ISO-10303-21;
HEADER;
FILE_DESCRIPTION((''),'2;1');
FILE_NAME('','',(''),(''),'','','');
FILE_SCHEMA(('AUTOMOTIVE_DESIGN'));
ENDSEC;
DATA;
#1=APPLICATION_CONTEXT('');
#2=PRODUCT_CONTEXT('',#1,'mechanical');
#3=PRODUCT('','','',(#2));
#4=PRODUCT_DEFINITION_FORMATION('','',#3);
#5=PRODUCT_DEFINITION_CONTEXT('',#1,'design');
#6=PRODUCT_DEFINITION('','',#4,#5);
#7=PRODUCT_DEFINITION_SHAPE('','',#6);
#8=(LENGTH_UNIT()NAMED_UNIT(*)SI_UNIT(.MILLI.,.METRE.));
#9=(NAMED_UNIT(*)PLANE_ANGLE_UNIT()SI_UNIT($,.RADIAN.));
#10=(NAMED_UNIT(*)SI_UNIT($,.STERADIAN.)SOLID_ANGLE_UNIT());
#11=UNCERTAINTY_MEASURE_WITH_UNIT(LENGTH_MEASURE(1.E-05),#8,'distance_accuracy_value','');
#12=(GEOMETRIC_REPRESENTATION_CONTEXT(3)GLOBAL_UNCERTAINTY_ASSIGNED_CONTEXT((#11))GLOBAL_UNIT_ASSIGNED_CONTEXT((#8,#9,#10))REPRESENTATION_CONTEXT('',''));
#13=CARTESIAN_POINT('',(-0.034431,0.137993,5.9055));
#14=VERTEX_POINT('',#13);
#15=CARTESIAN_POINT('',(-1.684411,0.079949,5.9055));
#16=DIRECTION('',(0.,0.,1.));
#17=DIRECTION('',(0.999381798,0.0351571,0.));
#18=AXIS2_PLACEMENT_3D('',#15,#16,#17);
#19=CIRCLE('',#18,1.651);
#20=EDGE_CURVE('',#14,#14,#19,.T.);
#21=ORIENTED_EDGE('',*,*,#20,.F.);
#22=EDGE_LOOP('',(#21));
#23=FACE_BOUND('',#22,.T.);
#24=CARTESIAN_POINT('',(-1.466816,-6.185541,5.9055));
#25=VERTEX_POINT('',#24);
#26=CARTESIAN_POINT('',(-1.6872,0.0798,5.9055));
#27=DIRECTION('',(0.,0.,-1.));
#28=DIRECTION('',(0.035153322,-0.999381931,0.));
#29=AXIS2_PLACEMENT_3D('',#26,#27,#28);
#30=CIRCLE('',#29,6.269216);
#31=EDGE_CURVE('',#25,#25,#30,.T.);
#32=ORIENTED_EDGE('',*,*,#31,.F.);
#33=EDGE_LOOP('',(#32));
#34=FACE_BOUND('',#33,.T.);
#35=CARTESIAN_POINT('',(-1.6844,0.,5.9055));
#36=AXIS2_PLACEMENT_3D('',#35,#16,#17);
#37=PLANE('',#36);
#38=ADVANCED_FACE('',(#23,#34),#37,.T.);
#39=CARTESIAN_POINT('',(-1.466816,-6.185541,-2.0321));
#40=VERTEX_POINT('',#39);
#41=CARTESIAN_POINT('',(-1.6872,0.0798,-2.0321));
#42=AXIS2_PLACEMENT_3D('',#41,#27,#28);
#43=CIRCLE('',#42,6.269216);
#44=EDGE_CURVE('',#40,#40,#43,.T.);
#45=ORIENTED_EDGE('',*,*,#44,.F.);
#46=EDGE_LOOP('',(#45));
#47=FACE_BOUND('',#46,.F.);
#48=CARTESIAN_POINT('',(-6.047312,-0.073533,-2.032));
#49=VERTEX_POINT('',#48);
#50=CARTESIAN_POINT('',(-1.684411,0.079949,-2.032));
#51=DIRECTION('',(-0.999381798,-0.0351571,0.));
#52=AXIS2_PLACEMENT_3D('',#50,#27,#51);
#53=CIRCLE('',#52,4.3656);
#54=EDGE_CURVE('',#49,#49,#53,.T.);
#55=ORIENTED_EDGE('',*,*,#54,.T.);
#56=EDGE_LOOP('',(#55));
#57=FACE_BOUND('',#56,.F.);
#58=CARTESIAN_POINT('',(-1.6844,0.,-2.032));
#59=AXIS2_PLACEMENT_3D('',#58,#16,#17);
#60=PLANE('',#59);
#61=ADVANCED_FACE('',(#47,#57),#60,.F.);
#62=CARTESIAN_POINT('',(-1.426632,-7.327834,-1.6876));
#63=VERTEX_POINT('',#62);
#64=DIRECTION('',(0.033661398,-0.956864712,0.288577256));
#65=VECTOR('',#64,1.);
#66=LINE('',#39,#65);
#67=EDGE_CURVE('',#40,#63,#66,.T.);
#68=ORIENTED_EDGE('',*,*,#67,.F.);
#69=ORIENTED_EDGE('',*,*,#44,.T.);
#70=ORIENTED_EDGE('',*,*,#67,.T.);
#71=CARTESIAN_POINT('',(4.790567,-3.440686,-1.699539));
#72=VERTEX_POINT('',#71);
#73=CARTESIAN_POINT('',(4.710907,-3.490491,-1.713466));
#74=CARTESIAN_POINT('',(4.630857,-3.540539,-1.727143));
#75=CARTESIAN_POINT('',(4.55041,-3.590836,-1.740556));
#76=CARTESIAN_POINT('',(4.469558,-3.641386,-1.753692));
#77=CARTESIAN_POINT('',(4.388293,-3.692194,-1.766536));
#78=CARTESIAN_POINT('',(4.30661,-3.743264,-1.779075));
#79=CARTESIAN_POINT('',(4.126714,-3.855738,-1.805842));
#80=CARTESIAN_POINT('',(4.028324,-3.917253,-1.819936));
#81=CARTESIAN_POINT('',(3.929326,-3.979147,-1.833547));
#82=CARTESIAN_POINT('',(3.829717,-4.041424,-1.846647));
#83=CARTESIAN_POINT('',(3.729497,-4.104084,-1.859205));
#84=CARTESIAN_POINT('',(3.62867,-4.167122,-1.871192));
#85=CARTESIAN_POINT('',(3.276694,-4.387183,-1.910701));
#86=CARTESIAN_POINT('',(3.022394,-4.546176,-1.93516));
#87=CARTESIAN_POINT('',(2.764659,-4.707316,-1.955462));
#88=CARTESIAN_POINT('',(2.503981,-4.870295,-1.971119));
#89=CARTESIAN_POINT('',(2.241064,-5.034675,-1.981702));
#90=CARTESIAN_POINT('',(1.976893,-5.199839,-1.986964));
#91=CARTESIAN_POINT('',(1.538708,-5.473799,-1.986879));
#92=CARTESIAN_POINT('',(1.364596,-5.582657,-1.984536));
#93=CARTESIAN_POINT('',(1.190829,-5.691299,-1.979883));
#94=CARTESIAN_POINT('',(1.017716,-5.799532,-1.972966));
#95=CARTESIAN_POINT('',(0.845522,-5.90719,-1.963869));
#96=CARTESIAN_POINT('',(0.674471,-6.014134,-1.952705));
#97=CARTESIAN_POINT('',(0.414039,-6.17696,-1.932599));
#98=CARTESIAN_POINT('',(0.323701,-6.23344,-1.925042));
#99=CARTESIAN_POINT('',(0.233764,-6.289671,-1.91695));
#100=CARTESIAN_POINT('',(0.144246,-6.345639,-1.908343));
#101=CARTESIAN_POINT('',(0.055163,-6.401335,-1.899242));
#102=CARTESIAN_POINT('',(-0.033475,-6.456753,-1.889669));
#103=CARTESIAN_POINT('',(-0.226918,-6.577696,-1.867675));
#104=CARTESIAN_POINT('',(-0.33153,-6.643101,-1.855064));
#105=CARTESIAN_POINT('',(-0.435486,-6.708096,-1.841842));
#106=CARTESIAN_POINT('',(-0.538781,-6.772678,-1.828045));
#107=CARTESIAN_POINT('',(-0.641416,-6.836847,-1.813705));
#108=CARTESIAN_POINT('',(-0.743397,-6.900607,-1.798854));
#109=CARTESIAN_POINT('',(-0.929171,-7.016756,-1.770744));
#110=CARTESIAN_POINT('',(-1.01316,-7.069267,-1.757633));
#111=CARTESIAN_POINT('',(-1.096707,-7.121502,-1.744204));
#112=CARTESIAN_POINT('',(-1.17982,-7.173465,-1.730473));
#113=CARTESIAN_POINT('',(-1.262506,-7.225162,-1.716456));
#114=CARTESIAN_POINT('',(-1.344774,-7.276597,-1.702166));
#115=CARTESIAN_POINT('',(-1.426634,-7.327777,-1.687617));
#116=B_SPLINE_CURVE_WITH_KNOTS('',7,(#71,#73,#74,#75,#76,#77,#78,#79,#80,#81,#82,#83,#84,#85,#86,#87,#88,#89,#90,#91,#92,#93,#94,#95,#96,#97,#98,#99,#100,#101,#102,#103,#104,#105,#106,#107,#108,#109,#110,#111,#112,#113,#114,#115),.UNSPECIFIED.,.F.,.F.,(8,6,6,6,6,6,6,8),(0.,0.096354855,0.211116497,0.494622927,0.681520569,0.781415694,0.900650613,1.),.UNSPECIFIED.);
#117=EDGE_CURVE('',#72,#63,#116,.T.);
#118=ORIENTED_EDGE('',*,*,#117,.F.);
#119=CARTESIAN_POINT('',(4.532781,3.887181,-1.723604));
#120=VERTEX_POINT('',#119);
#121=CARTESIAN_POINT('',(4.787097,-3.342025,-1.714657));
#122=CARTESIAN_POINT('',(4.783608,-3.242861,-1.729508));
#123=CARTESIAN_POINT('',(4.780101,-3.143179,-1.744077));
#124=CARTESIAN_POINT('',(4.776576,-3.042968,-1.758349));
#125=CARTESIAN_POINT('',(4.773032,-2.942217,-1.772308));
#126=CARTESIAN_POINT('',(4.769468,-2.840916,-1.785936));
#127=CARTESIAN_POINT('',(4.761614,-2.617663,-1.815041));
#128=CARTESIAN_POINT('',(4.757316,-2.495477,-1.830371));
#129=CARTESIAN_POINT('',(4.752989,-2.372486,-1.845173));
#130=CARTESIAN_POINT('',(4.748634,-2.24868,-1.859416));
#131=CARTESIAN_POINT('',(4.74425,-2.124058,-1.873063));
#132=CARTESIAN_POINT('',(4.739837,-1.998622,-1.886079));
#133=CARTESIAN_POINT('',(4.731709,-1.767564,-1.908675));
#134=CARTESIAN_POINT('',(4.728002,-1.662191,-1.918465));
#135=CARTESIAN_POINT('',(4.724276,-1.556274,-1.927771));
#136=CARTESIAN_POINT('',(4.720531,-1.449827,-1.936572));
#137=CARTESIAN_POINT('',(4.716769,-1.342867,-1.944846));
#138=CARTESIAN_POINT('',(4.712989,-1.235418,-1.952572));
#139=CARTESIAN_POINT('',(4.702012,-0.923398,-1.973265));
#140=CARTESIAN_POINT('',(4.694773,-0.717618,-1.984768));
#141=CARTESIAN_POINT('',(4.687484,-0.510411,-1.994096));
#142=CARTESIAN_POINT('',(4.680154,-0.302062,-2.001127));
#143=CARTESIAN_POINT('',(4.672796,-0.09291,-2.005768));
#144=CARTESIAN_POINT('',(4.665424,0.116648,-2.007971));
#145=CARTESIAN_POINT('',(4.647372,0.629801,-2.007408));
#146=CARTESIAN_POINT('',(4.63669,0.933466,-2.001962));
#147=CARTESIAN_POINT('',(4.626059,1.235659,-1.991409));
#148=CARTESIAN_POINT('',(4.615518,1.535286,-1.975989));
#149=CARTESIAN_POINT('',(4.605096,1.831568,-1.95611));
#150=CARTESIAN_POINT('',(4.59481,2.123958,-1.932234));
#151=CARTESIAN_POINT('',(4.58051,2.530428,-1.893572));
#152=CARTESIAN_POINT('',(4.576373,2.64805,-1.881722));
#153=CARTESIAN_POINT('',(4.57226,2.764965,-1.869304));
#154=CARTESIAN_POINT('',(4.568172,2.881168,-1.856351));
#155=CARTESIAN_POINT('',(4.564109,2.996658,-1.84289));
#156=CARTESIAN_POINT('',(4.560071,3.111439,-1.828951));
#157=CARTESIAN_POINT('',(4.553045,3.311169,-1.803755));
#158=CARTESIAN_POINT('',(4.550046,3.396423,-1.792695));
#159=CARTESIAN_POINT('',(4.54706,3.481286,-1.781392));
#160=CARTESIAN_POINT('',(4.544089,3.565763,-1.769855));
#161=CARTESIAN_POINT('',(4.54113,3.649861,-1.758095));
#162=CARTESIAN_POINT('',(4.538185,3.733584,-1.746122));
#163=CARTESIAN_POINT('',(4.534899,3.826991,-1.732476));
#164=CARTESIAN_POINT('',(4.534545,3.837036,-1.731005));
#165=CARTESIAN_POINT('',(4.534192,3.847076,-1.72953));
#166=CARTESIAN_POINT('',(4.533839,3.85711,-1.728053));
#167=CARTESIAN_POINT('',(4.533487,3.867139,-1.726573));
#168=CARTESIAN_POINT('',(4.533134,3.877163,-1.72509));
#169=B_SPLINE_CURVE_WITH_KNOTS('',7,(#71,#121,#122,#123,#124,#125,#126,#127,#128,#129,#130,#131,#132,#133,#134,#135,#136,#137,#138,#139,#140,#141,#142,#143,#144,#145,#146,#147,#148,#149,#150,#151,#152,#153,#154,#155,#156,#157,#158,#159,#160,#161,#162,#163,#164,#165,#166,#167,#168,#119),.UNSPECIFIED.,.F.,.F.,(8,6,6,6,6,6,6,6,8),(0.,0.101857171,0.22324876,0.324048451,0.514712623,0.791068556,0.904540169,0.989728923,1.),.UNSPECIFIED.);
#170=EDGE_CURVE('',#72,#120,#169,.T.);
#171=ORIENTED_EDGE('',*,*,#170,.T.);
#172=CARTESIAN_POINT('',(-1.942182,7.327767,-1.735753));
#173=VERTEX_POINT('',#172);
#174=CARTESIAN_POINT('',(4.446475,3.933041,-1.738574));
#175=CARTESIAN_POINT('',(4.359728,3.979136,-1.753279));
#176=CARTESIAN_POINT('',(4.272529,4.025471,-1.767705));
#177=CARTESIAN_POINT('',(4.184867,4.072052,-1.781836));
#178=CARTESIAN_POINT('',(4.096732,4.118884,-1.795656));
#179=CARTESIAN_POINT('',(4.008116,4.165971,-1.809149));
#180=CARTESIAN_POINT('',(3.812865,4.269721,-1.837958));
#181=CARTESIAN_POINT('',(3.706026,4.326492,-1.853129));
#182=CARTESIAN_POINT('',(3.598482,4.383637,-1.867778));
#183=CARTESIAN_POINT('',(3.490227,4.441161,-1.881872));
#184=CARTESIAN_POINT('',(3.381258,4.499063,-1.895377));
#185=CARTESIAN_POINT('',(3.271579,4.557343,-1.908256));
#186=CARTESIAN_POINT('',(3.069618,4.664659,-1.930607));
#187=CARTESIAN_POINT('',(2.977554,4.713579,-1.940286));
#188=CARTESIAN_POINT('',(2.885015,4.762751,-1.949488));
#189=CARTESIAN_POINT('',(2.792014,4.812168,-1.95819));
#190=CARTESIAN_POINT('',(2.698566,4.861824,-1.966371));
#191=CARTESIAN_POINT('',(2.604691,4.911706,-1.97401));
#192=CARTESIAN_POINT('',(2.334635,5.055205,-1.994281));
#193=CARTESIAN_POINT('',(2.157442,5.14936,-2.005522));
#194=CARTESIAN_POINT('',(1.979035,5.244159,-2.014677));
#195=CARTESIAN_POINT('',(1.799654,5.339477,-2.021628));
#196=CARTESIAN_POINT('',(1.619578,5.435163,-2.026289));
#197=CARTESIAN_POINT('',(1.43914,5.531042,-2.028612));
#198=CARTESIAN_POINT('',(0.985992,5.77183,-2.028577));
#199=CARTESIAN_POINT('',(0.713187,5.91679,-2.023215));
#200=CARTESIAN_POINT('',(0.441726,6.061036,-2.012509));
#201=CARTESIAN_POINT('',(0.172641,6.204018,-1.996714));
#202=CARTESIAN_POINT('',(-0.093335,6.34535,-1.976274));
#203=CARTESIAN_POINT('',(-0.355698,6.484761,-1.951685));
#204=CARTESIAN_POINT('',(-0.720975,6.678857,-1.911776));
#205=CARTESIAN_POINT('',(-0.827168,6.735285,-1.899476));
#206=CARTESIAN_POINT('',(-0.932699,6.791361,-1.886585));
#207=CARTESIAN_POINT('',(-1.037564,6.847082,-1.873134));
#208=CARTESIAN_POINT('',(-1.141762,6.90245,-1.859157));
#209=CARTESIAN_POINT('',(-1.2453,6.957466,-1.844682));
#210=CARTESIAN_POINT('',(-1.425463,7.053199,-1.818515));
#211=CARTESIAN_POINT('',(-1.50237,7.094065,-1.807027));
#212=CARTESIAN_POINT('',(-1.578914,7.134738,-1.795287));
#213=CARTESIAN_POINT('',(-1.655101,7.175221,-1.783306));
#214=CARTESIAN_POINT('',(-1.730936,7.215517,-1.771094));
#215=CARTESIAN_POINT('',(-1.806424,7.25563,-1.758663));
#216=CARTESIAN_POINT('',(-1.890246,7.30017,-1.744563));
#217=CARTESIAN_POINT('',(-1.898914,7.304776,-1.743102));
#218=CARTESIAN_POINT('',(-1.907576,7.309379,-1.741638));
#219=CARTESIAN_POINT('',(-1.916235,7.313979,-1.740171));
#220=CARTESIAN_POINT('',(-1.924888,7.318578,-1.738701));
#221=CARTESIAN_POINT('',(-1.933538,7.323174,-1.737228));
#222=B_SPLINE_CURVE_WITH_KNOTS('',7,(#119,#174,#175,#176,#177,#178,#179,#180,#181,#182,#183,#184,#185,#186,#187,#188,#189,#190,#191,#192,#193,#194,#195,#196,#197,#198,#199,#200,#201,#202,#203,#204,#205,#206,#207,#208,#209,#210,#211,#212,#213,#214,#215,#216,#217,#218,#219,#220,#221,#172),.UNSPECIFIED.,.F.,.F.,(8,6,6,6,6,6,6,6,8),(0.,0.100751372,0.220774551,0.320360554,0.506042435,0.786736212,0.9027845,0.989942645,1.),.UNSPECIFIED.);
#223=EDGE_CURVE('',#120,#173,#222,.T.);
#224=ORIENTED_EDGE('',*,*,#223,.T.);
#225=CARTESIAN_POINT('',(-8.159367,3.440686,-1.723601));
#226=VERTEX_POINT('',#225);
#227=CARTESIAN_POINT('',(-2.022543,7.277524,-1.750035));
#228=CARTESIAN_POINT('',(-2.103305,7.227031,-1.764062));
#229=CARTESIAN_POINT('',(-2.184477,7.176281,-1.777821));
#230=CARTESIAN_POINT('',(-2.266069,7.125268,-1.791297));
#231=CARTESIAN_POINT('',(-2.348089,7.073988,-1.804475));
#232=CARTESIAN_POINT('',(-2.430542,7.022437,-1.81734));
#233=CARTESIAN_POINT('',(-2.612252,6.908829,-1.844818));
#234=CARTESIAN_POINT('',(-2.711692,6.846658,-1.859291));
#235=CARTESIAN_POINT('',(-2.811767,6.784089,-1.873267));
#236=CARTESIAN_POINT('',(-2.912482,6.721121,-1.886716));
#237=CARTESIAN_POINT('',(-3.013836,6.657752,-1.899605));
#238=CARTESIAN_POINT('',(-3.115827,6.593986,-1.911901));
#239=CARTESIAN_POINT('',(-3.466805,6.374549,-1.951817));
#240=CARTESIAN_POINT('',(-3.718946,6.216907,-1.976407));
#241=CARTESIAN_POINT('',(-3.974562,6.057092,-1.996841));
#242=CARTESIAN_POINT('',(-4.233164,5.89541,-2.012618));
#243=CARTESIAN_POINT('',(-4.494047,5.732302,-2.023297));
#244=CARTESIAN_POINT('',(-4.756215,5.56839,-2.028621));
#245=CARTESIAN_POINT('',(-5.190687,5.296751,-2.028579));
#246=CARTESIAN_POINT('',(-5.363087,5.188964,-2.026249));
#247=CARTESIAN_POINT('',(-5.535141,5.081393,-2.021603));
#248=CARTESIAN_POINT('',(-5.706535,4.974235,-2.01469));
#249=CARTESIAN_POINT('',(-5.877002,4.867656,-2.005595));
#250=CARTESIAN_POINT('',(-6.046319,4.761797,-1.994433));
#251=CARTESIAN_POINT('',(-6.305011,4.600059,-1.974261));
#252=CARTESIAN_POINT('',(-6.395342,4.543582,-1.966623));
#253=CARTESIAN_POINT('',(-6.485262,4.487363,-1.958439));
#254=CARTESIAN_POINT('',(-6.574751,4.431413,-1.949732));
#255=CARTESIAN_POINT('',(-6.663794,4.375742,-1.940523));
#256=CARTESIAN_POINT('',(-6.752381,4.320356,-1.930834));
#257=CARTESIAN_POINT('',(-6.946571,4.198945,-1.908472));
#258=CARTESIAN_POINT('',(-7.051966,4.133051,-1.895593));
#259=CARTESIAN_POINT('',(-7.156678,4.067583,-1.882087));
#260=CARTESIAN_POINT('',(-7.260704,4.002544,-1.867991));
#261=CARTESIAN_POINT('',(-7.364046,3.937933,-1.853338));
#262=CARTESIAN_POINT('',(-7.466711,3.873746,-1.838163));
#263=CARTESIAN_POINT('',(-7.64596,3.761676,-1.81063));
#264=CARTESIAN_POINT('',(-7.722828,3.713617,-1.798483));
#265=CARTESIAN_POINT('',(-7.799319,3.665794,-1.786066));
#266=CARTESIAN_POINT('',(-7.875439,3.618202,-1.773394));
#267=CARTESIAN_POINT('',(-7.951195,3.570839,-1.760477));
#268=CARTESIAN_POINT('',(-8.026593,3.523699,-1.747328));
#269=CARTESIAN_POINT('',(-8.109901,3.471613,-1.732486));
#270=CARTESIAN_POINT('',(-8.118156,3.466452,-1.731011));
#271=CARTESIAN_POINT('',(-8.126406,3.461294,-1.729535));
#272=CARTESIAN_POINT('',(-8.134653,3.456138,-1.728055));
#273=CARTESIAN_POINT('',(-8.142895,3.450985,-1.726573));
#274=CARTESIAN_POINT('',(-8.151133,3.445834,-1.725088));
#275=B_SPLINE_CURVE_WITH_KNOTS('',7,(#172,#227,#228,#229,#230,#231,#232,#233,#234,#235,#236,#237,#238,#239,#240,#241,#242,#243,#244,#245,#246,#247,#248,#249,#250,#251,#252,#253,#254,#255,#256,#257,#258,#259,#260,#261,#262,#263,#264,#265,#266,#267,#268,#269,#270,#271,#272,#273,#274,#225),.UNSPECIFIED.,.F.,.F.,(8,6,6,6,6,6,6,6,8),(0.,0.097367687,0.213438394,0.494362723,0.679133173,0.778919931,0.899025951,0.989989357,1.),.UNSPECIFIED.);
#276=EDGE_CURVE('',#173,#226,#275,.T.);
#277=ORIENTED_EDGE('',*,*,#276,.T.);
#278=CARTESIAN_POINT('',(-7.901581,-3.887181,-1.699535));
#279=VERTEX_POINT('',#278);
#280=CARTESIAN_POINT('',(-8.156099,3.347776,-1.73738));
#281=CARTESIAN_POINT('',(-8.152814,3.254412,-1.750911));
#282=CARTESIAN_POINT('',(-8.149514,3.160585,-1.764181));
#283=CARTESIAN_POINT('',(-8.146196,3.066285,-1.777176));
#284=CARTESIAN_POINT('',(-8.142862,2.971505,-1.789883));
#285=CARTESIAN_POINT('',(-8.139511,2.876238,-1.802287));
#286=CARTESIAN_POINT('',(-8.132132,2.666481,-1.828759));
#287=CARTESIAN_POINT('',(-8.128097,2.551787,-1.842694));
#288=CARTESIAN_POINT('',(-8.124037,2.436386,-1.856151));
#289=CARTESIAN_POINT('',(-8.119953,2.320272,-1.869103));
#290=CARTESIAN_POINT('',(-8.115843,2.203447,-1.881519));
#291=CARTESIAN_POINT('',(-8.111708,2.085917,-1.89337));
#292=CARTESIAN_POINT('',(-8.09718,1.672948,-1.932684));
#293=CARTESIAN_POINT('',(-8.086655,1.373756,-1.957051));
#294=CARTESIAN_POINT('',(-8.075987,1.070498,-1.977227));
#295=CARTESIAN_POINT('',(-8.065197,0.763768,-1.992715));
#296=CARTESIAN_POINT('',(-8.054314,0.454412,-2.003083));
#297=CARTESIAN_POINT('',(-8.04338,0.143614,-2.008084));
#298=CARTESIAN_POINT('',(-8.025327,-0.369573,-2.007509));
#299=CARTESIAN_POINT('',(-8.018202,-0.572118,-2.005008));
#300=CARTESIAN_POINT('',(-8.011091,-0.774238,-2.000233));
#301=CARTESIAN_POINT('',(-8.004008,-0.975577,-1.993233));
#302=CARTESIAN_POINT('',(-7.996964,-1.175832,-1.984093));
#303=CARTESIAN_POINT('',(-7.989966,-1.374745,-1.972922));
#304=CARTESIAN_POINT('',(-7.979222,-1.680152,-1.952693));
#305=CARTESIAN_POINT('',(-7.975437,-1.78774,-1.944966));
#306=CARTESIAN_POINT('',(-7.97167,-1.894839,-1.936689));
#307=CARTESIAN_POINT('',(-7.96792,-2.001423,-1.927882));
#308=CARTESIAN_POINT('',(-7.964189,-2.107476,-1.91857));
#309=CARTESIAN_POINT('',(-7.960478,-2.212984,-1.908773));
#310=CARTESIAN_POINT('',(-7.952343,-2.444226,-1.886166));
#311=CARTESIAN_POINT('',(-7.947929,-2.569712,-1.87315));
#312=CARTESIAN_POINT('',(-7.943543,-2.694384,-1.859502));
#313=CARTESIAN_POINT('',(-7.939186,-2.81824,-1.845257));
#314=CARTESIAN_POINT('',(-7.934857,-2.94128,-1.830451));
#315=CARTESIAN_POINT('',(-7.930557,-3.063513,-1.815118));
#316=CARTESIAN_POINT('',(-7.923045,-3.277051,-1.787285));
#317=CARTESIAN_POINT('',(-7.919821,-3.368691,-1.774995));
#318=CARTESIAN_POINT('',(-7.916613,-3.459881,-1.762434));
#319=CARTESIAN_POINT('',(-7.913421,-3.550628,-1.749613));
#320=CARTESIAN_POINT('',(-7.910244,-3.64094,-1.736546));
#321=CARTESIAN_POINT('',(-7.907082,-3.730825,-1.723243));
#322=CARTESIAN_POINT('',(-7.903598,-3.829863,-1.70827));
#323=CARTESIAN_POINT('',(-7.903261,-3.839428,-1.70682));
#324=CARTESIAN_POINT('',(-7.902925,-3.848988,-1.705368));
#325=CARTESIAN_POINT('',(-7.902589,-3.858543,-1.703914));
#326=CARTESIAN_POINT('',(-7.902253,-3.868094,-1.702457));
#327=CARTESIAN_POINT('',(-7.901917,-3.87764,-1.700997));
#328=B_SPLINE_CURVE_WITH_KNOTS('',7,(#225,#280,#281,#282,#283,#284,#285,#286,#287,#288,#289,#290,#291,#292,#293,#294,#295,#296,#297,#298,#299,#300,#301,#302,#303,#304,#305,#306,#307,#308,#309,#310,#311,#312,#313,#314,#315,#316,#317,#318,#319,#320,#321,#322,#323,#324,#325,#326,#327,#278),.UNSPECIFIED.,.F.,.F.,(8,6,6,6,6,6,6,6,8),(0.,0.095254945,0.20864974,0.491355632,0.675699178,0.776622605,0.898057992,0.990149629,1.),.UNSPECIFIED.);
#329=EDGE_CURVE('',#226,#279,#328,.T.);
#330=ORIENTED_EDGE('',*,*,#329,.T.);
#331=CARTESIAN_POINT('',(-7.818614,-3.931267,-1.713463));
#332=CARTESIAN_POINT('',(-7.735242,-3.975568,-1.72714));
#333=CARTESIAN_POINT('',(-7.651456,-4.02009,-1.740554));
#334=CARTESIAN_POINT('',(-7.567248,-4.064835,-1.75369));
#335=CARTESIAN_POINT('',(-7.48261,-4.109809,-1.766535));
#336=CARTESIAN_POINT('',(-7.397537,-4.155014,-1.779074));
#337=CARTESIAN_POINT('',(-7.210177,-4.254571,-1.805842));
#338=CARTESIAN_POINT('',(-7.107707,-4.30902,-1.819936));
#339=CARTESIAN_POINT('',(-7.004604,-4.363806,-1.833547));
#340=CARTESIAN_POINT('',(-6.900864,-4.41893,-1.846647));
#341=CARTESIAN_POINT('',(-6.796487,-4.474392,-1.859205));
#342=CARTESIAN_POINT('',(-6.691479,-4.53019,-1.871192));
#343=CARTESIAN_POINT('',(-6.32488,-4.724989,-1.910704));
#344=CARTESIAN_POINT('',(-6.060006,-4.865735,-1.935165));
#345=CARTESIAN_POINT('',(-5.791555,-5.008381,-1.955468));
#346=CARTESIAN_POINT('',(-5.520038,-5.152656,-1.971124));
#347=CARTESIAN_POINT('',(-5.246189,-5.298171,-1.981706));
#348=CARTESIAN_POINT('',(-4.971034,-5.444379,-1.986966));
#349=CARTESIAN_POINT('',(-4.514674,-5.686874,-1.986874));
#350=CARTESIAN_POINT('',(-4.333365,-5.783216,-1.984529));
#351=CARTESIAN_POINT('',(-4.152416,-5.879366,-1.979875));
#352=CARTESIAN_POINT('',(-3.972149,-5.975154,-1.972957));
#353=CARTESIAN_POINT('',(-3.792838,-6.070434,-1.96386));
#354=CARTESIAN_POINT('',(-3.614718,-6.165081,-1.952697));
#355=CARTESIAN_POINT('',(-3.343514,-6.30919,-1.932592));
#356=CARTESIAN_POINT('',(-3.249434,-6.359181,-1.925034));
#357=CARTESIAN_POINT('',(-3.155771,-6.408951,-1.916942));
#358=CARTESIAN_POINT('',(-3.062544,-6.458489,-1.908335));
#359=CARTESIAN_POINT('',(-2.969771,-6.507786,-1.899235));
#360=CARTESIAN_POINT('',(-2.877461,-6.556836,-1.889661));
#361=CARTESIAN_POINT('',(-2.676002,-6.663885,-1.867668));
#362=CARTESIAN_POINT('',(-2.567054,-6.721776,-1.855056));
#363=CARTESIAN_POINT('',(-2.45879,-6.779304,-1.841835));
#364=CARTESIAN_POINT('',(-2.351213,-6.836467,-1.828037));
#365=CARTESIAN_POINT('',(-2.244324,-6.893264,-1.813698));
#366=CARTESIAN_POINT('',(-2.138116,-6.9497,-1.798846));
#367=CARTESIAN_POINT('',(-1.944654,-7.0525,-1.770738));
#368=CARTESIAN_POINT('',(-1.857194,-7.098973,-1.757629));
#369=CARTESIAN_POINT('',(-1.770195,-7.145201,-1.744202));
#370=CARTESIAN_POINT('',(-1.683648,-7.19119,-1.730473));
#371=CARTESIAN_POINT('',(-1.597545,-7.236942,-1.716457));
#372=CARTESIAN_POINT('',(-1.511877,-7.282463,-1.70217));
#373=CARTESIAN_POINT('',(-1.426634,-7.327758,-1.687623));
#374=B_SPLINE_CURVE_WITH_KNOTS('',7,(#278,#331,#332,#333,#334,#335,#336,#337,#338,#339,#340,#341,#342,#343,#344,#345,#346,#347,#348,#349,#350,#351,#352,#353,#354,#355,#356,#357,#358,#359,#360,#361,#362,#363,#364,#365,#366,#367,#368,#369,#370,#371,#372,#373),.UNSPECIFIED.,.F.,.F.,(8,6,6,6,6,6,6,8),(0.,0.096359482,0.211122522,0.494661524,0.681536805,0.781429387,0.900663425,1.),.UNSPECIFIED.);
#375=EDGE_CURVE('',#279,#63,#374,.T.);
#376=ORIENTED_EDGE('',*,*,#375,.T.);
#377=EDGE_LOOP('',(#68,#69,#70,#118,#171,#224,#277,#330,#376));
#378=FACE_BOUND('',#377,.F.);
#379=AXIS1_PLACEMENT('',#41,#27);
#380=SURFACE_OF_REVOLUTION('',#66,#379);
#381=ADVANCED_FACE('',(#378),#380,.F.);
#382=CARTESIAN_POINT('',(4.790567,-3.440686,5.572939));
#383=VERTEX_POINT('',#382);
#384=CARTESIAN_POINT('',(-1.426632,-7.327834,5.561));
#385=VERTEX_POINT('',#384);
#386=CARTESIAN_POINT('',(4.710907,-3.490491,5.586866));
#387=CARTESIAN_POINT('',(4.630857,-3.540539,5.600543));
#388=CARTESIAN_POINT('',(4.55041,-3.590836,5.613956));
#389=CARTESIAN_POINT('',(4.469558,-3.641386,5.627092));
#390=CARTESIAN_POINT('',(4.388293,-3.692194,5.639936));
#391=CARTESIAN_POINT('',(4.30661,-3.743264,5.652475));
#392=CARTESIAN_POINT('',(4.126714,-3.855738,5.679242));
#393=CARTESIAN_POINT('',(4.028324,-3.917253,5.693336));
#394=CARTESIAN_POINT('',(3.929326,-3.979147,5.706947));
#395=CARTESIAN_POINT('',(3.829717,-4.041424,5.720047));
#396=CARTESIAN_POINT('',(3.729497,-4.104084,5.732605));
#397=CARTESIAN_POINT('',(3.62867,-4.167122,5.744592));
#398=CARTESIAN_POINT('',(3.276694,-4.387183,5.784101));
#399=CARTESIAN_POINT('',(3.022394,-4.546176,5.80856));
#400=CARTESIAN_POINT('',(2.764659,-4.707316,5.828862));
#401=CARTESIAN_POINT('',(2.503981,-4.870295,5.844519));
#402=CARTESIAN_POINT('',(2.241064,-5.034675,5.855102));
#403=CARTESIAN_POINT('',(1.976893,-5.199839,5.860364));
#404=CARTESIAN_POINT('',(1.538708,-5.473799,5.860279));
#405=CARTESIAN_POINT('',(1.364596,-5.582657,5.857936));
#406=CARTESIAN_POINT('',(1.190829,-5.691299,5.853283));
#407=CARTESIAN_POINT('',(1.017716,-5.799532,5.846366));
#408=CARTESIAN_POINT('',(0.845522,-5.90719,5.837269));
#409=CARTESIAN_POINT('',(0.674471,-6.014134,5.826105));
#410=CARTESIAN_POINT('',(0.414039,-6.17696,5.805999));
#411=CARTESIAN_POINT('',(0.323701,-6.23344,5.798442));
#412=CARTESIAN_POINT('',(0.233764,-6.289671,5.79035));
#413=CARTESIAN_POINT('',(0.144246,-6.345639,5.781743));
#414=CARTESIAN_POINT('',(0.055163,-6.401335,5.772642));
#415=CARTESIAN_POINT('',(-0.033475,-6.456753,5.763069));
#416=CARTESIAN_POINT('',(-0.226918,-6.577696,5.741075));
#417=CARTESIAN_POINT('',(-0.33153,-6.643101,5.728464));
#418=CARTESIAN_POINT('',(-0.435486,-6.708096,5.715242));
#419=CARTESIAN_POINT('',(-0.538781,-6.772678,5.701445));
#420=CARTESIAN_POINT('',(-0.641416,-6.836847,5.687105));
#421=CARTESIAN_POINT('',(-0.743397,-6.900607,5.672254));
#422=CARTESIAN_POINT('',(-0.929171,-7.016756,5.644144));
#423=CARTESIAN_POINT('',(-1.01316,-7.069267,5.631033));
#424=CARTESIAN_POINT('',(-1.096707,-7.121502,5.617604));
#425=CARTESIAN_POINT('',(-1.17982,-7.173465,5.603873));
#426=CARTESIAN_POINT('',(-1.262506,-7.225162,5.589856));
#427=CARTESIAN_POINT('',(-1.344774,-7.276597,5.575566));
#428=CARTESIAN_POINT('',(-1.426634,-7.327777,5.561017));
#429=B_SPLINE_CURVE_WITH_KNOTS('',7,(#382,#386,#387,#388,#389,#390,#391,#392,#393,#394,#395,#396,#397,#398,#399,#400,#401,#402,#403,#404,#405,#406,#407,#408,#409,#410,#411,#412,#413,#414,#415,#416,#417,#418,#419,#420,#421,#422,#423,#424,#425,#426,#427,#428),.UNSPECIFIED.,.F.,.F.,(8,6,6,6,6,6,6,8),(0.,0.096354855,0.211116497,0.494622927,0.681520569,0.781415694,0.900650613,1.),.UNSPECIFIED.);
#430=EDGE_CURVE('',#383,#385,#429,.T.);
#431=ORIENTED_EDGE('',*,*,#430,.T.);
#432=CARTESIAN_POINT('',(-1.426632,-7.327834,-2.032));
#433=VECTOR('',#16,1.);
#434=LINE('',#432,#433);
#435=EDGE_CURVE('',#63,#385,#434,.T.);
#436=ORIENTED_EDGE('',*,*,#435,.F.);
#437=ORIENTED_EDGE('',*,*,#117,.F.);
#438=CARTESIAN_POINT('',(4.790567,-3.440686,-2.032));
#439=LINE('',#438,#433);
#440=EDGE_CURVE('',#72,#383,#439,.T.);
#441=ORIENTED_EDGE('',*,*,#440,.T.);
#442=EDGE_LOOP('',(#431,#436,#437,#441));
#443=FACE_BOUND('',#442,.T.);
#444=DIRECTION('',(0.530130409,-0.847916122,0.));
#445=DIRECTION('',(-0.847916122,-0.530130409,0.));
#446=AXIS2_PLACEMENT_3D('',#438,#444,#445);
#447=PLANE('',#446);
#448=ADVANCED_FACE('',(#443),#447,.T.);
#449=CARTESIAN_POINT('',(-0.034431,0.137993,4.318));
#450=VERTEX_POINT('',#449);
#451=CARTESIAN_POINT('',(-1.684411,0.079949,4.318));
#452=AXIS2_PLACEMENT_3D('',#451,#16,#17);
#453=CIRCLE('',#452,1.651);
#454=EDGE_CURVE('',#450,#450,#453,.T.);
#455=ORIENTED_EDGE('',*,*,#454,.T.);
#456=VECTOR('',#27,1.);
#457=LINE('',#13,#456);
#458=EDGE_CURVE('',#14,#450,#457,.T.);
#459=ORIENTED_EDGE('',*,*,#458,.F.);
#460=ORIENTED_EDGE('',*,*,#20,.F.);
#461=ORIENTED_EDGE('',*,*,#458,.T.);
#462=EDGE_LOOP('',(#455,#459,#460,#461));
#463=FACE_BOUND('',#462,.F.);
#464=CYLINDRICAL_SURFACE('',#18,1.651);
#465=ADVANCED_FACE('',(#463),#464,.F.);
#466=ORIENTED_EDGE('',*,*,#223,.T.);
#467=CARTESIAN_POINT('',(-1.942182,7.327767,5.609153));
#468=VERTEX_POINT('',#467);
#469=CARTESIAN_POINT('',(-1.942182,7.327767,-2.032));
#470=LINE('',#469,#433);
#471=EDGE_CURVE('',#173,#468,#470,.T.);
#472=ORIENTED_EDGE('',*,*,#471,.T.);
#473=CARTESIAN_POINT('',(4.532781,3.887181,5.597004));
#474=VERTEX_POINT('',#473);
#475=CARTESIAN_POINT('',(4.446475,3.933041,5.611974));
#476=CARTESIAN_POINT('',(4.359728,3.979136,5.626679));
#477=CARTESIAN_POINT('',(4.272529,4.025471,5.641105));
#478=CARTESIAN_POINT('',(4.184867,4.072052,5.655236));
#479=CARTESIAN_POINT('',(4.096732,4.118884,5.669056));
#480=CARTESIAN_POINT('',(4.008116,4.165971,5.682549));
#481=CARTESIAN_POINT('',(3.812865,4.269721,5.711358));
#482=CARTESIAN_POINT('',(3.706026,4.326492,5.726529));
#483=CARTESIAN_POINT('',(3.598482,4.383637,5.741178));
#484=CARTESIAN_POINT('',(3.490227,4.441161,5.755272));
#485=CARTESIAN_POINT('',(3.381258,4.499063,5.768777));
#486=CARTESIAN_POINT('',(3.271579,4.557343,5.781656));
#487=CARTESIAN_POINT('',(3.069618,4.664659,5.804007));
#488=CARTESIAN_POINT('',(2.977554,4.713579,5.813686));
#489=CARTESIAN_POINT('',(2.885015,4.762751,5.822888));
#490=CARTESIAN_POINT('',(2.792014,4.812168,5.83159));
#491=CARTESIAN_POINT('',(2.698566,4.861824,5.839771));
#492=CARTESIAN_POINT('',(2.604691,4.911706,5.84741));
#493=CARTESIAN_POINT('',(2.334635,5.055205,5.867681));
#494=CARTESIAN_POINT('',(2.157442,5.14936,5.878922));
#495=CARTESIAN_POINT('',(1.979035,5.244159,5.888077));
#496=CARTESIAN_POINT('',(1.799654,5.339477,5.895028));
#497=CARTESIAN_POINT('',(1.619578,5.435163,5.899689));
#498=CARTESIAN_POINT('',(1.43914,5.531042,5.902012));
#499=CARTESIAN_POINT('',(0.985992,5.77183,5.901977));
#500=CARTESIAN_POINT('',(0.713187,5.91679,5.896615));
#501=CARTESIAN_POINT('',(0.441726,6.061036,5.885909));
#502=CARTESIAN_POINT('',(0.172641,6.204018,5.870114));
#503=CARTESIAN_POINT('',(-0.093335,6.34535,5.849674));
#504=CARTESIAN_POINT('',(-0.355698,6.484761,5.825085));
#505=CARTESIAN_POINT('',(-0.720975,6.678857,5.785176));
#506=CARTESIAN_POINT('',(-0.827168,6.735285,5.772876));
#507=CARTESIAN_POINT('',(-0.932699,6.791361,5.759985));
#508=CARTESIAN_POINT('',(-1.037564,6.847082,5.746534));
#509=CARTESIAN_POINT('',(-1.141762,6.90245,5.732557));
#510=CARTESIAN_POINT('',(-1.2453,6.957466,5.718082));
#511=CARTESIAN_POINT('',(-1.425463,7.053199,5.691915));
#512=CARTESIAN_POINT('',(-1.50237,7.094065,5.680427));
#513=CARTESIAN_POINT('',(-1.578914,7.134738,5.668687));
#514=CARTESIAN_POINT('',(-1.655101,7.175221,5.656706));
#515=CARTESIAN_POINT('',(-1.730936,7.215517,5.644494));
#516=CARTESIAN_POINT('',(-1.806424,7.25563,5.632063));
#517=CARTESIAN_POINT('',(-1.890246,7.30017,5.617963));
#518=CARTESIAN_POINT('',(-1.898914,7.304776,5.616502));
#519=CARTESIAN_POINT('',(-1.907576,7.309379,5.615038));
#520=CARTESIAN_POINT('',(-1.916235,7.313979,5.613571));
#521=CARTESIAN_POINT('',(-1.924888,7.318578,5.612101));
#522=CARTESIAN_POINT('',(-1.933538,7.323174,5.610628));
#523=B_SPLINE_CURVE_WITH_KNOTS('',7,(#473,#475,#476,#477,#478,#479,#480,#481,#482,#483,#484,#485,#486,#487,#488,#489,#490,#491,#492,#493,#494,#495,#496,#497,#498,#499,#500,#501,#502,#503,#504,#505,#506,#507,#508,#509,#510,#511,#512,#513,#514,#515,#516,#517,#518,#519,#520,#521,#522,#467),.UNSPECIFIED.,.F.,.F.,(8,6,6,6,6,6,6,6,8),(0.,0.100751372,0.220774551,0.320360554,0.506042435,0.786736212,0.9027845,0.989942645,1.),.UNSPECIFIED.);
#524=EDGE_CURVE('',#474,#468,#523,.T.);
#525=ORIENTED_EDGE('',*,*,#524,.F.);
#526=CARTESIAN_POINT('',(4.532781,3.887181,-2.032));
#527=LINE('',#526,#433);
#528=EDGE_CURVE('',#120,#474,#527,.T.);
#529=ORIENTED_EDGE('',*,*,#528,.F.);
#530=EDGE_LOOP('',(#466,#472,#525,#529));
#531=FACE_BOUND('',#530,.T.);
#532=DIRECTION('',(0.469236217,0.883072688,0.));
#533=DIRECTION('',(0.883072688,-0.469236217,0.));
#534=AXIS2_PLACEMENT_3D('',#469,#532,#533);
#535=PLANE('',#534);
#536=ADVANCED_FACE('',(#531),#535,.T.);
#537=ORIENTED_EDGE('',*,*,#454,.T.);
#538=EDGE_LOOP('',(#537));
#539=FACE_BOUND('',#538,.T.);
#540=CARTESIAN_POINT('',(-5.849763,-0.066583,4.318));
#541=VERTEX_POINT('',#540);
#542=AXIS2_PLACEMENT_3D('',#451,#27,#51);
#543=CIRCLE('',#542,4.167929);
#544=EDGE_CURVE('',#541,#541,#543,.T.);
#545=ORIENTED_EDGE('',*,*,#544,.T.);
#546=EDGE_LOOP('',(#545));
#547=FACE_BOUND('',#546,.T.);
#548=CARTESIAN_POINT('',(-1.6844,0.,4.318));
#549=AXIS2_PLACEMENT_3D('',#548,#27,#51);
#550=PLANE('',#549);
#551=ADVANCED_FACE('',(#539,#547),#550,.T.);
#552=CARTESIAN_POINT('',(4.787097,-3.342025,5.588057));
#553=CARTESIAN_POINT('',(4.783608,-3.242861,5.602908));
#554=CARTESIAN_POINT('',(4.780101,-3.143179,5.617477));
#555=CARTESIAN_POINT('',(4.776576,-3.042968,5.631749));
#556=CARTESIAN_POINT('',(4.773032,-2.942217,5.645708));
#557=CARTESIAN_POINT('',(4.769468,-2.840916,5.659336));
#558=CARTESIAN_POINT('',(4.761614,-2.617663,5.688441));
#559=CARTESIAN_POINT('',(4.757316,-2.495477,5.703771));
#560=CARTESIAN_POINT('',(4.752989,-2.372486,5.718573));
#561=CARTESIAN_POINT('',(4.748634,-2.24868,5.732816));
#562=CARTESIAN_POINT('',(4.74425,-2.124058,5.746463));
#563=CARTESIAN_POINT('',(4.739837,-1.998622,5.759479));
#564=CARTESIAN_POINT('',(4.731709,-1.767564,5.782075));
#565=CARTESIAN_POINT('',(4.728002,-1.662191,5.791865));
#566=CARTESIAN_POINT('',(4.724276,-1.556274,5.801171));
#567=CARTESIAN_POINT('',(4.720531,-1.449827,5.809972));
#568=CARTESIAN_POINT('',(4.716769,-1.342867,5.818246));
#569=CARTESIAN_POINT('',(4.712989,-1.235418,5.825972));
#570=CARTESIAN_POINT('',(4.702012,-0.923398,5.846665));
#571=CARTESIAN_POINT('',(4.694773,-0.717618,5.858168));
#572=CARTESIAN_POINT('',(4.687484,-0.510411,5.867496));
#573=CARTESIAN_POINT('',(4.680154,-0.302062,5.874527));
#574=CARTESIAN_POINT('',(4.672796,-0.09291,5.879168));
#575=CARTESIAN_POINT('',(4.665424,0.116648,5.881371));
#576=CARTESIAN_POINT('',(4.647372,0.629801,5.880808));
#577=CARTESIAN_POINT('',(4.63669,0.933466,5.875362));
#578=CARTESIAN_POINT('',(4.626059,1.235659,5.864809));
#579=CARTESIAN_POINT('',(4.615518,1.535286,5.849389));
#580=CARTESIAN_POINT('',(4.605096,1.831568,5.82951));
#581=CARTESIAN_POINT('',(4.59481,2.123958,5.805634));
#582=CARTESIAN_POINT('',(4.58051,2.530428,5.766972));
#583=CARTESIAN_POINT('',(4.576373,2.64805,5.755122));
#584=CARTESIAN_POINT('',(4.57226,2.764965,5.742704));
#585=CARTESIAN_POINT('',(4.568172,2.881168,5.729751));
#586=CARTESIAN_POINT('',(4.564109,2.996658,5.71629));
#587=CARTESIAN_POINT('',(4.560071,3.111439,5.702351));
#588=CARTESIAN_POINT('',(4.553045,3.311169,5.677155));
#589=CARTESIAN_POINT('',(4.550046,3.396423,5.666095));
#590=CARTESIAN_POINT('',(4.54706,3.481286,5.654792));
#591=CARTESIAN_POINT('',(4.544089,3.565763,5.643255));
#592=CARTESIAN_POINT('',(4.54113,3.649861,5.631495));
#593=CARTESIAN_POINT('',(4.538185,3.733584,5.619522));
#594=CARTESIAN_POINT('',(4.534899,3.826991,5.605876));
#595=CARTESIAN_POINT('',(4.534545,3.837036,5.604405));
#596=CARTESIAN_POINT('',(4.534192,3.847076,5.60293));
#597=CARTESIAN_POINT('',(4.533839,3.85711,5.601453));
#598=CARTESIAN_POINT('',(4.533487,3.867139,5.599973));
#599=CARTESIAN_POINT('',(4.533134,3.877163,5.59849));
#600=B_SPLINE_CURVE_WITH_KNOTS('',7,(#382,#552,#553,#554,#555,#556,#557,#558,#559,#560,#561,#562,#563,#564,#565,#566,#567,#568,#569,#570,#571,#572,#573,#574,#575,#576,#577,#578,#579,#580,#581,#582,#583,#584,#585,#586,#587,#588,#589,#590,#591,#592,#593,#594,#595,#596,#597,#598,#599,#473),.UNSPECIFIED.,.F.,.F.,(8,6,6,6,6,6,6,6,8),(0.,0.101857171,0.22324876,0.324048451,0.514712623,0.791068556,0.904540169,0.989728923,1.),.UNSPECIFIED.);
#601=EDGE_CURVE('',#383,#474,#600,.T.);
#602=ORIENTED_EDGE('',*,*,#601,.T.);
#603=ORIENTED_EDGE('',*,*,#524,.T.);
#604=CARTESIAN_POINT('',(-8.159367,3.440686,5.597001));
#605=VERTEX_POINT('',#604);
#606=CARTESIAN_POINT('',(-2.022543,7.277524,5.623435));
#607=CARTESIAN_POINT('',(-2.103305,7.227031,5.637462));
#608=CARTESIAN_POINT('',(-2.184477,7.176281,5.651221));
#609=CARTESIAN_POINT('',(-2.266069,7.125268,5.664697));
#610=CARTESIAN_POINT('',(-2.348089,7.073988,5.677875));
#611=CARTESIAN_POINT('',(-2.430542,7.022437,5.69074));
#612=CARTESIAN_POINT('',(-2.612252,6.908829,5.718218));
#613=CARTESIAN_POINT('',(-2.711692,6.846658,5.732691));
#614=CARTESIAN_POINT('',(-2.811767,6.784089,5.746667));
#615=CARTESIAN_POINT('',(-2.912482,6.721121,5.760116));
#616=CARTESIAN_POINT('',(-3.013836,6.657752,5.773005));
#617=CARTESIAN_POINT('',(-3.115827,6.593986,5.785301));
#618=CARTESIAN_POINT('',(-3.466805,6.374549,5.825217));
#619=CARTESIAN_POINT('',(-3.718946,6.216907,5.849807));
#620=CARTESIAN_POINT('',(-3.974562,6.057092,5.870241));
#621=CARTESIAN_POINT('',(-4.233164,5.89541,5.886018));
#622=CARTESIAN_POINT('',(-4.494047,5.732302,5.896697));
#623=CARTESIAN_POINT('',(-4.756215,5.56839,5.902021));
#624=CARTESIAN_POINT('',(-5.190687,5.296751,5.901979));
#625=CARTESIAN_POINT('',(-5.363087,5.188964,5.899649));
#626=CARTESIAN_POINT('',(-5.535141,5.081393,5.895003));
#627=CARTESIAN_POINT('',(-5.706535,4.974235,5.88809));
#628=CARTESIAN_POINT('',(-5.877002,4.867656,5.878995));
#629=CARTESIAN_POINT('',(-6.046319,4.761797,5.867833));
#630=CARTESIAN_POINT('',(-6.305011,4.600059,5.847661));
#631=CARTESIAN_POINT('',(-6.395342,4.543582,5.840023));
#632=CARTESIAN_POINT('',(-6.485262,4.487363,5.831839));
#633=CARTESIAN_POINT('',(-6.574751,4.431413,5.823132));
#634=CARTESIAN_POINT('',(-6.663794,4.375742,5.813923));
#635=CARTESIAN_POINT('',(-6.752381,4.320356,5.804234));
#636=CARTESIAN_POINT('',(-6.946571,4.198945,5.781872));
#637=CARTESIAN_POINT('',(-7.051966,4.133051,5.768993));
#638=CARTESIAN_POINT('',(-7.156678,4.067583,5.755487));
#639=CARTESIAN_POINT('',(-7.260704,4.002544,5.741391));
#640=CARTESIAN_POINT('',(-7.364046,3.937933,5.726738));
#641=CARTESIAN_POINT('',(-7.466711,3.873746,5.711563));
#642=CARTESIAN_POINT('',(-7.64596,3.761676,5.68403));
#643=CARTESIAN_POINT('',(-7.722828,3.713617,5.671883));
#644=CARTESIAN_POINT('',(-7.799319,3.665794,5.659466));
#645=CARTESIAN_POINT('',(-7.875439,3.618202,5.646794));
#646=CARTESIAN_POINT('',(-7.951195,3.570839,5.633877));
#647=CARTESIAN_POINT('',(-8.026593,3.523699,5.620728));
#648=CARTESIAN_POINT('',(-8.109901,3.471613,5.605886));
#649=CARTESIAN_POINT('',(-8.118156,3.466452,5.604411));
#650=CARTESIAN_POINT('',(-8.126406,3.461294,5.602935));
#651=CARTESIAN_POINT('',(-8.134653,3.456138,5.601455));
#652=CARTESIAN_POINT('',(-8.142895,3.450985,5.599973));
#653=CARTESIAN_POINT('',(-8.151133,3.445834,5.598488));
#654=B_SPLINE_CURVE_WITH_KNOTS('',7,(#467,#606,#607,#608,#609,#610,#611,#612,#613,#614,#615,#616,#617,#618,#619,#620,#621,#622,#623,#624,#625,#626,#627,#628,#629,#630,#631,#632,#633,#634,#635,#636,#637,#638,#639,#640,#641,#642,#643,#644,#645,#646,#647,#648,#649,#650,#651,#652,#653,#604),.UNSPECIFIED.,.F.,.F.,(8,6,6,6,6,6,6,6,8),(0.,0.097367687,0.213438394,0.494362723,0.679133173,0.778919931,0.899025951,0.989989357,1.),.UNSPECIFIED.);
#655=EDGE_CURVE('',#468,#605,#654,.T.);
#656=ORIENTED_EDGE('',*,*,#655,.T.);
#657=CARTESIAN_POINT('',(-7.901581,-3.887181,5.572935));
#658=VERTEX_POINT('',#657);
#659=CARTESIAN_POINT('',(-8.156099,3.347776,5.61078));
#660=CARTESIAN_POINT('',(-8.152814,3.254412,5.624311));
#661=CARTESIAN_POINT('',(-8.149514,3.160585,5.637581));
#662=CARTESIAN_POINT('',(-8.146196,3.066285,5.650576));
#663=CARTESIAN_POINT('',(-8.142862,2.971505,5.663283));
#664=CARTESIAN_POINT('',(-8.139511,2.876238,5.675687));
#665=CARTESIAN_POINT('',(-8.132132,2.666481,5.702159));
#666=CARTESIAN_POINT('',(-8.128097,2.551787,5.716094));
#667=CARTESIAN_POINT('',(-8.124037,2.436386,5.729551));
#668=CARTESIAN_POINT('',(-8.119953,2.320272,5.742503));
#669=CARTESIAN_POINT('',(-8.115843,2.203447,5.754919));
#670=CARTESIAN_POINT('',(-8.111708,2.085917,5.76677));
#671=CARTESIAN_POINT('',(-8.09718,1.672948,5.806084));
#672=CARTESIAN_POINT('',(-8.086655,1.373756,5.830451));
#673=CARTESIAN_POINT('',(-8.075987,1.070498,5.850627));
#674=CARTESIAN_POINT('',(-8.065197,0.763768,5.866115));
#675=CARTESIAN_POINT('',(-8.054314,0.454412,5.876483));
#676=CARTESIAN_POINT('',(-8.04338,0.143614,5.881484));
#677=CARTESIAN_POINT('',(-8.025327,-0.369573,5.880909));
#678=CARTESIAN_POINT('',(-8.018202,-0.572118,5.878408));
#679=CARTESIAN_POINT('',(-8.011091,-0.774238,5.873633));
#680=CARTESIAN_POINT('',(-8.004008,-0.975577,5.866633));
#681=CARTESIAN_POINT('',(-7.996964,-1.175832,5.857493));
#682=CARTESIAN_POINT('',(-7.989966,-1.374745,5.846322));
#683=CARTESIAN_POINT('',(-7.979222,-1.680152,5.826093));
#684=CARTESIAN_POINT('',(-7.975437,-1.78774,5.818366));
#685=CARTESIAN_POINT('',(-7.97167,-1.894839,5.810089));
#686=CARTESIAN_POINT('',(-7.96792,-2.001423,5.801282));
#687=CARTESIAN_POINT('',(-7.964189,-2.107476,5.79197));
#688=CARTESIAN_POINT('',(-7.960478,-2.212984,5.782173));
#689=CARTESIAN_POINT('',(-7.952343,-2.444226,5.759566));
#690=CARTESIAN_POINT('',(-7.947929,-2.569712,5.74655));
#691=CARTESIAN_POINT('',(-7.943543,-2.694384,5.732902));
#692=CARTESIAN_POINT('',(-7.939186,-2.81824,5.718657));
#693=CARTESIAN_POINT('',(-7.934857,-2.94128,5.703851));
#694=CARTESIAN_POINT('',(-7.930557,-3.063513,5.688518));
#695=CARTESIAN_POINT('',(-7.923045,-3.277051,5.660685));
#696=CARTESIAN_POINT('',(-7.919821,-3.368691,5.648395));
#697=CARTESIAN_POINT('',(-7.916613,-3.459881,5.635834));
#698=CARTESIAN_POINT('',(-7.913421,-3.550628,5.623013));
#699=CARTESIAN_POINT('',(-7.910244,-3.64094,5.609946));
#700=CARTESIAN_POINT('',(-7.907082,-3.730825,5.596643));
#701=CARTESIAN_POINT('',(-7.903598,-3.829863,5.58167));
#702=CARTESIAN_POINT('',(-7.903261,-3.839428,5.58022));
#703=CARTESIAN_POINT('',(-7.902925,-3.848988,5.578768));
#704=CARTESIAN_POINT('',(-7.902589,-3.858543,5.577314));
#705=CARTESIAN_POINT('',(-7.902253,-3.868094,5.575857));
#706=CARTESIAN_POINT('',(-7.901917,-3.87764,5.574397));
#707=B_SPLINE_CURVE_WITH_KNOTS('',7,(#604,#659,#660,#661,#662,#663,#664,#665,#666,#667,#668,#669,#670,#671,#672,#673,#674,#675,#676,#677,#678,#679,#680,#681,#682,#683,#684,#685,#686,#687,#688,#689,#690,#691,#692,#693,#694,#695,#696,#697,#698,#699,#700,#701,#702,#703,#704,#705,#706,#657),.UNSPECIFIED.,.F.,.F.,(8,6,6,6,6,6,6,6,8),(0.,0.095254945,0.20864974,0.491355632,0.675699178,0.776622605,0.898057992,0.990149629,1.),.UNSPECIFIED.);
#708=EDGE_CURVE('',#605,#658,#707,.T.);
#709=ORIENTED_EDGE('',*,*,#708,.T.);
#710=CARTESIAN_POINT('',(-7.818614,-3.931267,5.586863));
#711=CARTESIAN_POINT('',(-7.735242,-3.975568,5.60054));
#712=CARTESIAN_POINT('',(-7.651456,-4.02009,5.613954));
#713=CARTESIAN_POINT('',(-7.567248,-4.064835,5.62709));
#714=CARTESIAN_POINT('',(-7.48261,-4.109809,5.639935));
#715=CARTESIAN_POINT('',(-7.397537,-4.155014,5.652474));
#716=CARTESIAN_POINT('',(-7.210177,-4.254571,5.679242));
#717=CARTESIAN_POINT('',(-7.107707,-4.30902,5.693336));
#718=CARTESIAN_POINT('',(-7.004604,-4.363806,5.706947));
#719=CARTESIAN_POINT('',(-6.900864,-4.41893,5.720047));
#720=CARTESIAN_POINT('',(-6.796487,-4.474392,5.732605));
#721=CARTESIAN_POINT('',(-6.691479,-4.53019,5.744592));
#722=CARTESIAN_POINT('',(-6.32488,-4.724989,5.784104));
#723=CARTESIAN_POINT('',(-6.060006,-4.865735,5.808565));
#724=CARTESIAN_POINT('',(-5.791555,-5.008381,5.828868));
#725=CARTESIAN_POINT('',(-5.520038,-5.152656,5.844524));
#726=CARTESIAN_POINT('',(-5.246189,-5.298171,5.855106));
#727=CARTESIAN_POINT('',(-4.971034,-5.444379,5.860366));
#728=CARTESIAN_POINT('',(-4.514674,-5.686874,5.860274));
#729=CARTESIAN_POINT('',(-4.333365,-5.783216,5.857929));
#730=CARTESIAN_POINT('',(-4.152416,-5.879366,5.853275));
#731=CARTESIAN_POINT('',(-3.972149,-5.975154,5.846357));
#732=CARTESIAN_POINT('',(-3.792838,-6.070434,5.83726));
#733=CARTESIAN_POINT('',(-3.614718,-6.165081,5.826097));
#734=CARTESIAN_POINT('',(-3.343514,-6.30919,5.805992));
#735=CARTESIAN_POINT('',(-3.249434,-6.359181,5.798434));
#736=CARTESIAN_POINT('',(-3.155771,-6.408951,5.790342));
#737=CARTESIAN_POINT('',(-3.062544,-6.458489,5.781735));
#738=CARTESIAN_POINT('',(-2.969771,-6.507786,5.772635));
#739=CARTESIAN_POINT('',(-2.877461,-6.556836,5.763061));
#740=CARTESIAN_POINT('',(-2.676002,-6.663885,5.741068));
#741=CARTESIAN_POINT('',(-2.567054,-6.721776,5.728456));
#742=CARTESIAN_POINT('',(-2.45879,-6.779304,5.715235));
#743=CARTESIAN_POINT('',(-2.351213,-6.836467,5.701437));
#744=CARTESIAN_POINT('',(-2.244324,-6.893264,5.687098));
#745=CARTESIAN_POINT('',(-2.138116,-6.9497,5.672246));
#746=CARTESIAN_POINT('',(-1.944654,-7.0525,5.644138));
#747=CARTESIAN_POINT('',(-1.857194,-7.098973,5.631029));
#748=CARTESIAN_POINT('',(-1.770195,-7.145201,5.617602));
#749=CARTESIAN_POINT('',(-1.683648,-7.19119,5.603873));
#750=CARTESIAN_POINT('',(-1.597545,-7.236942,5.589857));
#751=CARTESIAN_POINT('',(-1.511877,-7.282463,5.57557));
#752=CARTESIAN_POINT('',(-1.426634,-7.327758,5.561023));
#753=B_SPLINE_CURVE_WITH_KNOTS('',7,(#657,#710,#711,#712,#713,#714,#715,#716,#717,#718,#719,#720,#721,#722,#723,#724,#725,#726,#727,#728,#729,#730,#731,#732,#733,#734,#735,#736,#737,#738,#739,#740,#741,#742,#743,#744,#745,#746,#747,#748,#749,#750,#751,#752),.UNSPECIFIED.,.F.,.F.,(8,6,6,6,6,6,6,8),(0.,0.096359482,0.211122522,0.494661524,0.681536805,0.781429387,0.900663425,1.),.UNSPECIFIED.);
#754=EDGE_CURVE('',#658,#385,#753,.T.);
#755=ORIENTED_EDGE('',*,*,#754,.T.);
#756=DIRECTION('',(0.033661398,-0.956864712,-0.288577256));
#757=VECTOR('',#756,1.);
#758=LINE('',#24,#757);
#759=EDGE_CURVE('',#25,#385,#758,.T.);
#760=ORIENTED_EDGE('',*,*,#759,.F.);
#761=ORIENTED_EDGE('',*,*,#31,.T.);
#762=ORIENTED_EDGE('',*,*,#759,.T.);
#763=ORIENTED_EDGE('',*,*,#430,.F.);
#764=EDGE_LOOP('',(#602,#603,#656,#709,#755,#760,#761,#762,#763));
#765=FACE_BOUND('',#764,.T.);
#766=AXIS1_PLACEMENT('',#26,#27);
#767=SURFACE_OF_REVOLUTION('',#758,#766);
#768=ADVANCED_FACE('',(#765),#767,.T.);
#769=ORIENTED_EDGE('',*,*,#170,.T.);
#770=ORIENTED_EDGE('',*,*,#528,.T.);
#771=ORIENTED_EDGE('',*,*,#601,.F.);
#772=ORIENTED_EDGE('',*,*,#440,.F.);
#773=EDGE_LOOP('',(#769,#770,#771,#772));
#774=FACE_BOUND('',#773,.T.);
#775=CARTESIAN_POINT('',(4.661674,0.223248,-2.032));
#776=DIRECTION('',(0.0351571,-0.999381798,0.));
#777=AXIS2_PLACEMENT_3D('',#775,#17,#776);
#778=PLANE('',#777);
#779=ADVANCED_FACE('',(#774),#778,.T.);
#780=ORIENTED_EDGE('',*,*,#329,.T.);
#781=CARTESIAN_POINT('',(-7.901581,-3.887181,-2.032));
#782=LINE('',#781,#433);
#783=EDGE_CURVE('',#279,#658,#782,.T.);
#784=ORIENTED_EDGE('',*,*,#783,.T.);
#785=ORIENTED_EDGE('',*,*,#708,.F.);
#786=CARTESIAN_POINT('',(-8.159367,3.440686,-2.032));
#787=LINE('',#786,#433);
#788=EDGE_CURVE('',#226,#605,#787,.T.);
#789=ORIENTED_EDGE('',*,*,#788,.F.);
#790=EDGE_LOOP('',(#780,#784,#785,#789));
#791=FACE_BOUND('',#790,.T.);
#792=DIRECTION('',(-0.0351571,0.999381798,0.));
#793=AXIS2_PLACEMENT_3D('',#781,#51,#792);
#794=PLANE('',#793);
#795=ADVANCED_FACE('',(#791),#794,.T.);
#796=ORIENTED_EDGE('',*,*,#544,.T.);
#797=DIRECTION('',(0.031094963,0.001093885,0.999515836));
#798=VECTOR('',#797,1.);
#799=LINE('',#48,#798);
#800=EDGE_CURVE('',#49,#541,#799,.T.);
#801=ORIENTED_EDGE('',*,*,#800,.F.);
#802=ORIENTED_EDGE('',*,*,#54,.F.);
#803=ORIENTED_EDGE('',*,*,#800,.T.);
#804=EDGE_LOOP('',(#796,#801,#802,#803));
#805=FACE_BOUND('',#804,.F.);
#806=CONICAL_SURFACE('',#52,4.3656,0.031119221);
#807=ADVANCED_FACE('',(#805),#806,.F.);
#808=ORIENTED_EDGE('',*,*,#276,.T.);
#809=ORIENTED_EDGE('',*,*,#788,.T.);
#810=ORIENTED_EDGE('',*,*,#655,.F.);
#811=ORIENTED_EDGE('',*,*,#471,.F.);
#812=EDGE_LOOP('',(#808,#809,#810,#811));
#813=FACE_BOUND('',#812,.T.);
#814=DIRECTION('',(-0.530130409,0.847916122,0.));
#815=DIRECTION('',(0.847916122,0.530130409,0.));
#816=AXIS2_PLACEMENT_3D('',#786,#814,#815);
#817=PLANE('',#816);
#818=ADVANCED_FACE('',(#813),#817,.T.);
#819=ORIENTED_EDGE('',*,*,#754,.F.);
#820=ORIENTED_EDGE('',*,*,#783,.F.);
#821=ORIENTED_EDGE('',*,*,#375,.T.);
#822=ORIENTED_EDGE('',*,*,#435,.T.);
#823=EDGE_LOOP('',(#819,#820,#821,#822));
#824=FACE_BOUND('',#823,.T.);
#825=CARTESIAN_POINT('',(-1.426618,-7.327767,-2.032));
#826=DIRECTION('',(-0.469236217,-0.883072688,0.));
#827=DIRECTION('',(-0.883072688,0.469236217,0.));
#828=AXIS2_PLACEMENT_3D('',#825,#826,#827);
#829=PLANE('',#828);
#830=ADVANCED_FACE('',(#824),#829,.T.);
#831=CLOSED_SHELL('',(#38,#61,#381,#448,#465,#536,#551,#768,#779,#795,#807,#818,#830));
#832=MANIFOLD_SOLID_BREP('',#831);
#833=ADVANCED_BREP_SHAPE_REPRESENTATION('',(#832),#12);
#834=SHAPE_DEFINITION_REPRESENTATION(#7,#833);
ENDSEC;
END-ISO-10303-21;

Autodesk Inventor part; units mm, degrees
ref_plane "YZ Plane" through (0, 0, 0) normal (1, 0, 0) x (0, 1, 0)
ref_plane "XZ Plane" through (0, 0, 0) normal (0, 1, 0) x (-1, 0, 0)
ref_plane "Work Plane3" through (-1.6844, 0, -2.032) normal (0, 0, 1) x (0.9993818, 0.0351571, 0)
sketch "Sketch6" plane through (-1.6844, 0, -2.032) normal (0, 0, 1) x (0.9993818, 0.0351571, 0)
  circle A0 centre (0, 0) radius 6.35
  line L0 (0, 7.3323) -> (6.35, 3.6662)
  line L1 (6.35, 3.6662) -> (6.35, -3.6662)
  line L2 (6.35, -3.6662) -> (0, -7.3323)
  line L3 (0, -7.3323) -> (-6.35, -3.6662)
  line L4 (-6.35, -3.6662) -> (-6.35, 3.6662)
  line L5 (-6.35, 3.6662) -> (0, 7.3323)
  point P0 (1.6833, -0.0592)
  point P1 (0, 7.8524)
  dimension "d5" = 12.7
extrude "Extrusion2" add sketch "Sketch6" along normal blind 7.9375
sketch "Sketch7" plane through (-1.6844, 0, -2.032) normal (0, 0, -1) x (-0.9993818, -0.0351571, 0)
  circle A0 centre (-0.0028, 0.0799) radius 4.3656 projected
  point P0 (-1.6833, -0.0592)
extrude "Extrusion3" cut sketch "Sketch7" against normal blind 6.35 draft -1.783
sketch "Sketch8" plane through (-1.6844, 0, 5.9055) normal (0, 0, 1) x (0.9993818, 0.0351571, 0)
  circle A0 centre (0.0028, 0.0799) radius 1.651 projected
  point P0 (1.6833, -0.0592)
extrude "Extrusion4" cut sketch "Sketch8" against normal through all
thread "Thread1" size "1/8" designation "1/8 - 27 NPT" standard "NPT for PVC Pipe and Fitting" length 9.9568
ref_plane "Work Plane4" through (-1.9422, 7.3278, -2.032) normal (0.9993818, 0.0351571, 0) x (0, 0, 1)
sketch "Sketch9" plane through (-1.9422, 7.3278, -2.032) normal (0.9993818, 0.0351571, 0) x (0, 0, 1)
  line L0 (7.9375, 13.5217) -> (7.593, 14.6647)
  line L1 (7.593, 14.6647) -> (7.9375, 13.5217)
  line L2 (7.593, 14.6647) -> (7.9375, 14.6647)
  line L3 (7.9375, 14.6647) -> (7.9375, 13.5217)
  line L4 (9.525, 7.2525) -> (-1.5875, 7.2525) projected
  point P0 (2.032, 7.3916)
  dimension "d13" = 1.143
revolve "Revolution2" cut sketch "Sketch9" angle 360 about axis through (-1.6872, 0.0798, 5.9055) along (0, 0, -1)
ref_plane "Work Plane5" through (-1.6872, 0.0798, 1.9367) normal (0, 0, 1) x (1, 0, 0)
mirror "Mirror1" about plane through (-1.6872, 0.0798, 1.9367) normal (0, 0, 1) of "Revolution2"
properties part number "Pneumatics_VIAIR_Fitting_01"
